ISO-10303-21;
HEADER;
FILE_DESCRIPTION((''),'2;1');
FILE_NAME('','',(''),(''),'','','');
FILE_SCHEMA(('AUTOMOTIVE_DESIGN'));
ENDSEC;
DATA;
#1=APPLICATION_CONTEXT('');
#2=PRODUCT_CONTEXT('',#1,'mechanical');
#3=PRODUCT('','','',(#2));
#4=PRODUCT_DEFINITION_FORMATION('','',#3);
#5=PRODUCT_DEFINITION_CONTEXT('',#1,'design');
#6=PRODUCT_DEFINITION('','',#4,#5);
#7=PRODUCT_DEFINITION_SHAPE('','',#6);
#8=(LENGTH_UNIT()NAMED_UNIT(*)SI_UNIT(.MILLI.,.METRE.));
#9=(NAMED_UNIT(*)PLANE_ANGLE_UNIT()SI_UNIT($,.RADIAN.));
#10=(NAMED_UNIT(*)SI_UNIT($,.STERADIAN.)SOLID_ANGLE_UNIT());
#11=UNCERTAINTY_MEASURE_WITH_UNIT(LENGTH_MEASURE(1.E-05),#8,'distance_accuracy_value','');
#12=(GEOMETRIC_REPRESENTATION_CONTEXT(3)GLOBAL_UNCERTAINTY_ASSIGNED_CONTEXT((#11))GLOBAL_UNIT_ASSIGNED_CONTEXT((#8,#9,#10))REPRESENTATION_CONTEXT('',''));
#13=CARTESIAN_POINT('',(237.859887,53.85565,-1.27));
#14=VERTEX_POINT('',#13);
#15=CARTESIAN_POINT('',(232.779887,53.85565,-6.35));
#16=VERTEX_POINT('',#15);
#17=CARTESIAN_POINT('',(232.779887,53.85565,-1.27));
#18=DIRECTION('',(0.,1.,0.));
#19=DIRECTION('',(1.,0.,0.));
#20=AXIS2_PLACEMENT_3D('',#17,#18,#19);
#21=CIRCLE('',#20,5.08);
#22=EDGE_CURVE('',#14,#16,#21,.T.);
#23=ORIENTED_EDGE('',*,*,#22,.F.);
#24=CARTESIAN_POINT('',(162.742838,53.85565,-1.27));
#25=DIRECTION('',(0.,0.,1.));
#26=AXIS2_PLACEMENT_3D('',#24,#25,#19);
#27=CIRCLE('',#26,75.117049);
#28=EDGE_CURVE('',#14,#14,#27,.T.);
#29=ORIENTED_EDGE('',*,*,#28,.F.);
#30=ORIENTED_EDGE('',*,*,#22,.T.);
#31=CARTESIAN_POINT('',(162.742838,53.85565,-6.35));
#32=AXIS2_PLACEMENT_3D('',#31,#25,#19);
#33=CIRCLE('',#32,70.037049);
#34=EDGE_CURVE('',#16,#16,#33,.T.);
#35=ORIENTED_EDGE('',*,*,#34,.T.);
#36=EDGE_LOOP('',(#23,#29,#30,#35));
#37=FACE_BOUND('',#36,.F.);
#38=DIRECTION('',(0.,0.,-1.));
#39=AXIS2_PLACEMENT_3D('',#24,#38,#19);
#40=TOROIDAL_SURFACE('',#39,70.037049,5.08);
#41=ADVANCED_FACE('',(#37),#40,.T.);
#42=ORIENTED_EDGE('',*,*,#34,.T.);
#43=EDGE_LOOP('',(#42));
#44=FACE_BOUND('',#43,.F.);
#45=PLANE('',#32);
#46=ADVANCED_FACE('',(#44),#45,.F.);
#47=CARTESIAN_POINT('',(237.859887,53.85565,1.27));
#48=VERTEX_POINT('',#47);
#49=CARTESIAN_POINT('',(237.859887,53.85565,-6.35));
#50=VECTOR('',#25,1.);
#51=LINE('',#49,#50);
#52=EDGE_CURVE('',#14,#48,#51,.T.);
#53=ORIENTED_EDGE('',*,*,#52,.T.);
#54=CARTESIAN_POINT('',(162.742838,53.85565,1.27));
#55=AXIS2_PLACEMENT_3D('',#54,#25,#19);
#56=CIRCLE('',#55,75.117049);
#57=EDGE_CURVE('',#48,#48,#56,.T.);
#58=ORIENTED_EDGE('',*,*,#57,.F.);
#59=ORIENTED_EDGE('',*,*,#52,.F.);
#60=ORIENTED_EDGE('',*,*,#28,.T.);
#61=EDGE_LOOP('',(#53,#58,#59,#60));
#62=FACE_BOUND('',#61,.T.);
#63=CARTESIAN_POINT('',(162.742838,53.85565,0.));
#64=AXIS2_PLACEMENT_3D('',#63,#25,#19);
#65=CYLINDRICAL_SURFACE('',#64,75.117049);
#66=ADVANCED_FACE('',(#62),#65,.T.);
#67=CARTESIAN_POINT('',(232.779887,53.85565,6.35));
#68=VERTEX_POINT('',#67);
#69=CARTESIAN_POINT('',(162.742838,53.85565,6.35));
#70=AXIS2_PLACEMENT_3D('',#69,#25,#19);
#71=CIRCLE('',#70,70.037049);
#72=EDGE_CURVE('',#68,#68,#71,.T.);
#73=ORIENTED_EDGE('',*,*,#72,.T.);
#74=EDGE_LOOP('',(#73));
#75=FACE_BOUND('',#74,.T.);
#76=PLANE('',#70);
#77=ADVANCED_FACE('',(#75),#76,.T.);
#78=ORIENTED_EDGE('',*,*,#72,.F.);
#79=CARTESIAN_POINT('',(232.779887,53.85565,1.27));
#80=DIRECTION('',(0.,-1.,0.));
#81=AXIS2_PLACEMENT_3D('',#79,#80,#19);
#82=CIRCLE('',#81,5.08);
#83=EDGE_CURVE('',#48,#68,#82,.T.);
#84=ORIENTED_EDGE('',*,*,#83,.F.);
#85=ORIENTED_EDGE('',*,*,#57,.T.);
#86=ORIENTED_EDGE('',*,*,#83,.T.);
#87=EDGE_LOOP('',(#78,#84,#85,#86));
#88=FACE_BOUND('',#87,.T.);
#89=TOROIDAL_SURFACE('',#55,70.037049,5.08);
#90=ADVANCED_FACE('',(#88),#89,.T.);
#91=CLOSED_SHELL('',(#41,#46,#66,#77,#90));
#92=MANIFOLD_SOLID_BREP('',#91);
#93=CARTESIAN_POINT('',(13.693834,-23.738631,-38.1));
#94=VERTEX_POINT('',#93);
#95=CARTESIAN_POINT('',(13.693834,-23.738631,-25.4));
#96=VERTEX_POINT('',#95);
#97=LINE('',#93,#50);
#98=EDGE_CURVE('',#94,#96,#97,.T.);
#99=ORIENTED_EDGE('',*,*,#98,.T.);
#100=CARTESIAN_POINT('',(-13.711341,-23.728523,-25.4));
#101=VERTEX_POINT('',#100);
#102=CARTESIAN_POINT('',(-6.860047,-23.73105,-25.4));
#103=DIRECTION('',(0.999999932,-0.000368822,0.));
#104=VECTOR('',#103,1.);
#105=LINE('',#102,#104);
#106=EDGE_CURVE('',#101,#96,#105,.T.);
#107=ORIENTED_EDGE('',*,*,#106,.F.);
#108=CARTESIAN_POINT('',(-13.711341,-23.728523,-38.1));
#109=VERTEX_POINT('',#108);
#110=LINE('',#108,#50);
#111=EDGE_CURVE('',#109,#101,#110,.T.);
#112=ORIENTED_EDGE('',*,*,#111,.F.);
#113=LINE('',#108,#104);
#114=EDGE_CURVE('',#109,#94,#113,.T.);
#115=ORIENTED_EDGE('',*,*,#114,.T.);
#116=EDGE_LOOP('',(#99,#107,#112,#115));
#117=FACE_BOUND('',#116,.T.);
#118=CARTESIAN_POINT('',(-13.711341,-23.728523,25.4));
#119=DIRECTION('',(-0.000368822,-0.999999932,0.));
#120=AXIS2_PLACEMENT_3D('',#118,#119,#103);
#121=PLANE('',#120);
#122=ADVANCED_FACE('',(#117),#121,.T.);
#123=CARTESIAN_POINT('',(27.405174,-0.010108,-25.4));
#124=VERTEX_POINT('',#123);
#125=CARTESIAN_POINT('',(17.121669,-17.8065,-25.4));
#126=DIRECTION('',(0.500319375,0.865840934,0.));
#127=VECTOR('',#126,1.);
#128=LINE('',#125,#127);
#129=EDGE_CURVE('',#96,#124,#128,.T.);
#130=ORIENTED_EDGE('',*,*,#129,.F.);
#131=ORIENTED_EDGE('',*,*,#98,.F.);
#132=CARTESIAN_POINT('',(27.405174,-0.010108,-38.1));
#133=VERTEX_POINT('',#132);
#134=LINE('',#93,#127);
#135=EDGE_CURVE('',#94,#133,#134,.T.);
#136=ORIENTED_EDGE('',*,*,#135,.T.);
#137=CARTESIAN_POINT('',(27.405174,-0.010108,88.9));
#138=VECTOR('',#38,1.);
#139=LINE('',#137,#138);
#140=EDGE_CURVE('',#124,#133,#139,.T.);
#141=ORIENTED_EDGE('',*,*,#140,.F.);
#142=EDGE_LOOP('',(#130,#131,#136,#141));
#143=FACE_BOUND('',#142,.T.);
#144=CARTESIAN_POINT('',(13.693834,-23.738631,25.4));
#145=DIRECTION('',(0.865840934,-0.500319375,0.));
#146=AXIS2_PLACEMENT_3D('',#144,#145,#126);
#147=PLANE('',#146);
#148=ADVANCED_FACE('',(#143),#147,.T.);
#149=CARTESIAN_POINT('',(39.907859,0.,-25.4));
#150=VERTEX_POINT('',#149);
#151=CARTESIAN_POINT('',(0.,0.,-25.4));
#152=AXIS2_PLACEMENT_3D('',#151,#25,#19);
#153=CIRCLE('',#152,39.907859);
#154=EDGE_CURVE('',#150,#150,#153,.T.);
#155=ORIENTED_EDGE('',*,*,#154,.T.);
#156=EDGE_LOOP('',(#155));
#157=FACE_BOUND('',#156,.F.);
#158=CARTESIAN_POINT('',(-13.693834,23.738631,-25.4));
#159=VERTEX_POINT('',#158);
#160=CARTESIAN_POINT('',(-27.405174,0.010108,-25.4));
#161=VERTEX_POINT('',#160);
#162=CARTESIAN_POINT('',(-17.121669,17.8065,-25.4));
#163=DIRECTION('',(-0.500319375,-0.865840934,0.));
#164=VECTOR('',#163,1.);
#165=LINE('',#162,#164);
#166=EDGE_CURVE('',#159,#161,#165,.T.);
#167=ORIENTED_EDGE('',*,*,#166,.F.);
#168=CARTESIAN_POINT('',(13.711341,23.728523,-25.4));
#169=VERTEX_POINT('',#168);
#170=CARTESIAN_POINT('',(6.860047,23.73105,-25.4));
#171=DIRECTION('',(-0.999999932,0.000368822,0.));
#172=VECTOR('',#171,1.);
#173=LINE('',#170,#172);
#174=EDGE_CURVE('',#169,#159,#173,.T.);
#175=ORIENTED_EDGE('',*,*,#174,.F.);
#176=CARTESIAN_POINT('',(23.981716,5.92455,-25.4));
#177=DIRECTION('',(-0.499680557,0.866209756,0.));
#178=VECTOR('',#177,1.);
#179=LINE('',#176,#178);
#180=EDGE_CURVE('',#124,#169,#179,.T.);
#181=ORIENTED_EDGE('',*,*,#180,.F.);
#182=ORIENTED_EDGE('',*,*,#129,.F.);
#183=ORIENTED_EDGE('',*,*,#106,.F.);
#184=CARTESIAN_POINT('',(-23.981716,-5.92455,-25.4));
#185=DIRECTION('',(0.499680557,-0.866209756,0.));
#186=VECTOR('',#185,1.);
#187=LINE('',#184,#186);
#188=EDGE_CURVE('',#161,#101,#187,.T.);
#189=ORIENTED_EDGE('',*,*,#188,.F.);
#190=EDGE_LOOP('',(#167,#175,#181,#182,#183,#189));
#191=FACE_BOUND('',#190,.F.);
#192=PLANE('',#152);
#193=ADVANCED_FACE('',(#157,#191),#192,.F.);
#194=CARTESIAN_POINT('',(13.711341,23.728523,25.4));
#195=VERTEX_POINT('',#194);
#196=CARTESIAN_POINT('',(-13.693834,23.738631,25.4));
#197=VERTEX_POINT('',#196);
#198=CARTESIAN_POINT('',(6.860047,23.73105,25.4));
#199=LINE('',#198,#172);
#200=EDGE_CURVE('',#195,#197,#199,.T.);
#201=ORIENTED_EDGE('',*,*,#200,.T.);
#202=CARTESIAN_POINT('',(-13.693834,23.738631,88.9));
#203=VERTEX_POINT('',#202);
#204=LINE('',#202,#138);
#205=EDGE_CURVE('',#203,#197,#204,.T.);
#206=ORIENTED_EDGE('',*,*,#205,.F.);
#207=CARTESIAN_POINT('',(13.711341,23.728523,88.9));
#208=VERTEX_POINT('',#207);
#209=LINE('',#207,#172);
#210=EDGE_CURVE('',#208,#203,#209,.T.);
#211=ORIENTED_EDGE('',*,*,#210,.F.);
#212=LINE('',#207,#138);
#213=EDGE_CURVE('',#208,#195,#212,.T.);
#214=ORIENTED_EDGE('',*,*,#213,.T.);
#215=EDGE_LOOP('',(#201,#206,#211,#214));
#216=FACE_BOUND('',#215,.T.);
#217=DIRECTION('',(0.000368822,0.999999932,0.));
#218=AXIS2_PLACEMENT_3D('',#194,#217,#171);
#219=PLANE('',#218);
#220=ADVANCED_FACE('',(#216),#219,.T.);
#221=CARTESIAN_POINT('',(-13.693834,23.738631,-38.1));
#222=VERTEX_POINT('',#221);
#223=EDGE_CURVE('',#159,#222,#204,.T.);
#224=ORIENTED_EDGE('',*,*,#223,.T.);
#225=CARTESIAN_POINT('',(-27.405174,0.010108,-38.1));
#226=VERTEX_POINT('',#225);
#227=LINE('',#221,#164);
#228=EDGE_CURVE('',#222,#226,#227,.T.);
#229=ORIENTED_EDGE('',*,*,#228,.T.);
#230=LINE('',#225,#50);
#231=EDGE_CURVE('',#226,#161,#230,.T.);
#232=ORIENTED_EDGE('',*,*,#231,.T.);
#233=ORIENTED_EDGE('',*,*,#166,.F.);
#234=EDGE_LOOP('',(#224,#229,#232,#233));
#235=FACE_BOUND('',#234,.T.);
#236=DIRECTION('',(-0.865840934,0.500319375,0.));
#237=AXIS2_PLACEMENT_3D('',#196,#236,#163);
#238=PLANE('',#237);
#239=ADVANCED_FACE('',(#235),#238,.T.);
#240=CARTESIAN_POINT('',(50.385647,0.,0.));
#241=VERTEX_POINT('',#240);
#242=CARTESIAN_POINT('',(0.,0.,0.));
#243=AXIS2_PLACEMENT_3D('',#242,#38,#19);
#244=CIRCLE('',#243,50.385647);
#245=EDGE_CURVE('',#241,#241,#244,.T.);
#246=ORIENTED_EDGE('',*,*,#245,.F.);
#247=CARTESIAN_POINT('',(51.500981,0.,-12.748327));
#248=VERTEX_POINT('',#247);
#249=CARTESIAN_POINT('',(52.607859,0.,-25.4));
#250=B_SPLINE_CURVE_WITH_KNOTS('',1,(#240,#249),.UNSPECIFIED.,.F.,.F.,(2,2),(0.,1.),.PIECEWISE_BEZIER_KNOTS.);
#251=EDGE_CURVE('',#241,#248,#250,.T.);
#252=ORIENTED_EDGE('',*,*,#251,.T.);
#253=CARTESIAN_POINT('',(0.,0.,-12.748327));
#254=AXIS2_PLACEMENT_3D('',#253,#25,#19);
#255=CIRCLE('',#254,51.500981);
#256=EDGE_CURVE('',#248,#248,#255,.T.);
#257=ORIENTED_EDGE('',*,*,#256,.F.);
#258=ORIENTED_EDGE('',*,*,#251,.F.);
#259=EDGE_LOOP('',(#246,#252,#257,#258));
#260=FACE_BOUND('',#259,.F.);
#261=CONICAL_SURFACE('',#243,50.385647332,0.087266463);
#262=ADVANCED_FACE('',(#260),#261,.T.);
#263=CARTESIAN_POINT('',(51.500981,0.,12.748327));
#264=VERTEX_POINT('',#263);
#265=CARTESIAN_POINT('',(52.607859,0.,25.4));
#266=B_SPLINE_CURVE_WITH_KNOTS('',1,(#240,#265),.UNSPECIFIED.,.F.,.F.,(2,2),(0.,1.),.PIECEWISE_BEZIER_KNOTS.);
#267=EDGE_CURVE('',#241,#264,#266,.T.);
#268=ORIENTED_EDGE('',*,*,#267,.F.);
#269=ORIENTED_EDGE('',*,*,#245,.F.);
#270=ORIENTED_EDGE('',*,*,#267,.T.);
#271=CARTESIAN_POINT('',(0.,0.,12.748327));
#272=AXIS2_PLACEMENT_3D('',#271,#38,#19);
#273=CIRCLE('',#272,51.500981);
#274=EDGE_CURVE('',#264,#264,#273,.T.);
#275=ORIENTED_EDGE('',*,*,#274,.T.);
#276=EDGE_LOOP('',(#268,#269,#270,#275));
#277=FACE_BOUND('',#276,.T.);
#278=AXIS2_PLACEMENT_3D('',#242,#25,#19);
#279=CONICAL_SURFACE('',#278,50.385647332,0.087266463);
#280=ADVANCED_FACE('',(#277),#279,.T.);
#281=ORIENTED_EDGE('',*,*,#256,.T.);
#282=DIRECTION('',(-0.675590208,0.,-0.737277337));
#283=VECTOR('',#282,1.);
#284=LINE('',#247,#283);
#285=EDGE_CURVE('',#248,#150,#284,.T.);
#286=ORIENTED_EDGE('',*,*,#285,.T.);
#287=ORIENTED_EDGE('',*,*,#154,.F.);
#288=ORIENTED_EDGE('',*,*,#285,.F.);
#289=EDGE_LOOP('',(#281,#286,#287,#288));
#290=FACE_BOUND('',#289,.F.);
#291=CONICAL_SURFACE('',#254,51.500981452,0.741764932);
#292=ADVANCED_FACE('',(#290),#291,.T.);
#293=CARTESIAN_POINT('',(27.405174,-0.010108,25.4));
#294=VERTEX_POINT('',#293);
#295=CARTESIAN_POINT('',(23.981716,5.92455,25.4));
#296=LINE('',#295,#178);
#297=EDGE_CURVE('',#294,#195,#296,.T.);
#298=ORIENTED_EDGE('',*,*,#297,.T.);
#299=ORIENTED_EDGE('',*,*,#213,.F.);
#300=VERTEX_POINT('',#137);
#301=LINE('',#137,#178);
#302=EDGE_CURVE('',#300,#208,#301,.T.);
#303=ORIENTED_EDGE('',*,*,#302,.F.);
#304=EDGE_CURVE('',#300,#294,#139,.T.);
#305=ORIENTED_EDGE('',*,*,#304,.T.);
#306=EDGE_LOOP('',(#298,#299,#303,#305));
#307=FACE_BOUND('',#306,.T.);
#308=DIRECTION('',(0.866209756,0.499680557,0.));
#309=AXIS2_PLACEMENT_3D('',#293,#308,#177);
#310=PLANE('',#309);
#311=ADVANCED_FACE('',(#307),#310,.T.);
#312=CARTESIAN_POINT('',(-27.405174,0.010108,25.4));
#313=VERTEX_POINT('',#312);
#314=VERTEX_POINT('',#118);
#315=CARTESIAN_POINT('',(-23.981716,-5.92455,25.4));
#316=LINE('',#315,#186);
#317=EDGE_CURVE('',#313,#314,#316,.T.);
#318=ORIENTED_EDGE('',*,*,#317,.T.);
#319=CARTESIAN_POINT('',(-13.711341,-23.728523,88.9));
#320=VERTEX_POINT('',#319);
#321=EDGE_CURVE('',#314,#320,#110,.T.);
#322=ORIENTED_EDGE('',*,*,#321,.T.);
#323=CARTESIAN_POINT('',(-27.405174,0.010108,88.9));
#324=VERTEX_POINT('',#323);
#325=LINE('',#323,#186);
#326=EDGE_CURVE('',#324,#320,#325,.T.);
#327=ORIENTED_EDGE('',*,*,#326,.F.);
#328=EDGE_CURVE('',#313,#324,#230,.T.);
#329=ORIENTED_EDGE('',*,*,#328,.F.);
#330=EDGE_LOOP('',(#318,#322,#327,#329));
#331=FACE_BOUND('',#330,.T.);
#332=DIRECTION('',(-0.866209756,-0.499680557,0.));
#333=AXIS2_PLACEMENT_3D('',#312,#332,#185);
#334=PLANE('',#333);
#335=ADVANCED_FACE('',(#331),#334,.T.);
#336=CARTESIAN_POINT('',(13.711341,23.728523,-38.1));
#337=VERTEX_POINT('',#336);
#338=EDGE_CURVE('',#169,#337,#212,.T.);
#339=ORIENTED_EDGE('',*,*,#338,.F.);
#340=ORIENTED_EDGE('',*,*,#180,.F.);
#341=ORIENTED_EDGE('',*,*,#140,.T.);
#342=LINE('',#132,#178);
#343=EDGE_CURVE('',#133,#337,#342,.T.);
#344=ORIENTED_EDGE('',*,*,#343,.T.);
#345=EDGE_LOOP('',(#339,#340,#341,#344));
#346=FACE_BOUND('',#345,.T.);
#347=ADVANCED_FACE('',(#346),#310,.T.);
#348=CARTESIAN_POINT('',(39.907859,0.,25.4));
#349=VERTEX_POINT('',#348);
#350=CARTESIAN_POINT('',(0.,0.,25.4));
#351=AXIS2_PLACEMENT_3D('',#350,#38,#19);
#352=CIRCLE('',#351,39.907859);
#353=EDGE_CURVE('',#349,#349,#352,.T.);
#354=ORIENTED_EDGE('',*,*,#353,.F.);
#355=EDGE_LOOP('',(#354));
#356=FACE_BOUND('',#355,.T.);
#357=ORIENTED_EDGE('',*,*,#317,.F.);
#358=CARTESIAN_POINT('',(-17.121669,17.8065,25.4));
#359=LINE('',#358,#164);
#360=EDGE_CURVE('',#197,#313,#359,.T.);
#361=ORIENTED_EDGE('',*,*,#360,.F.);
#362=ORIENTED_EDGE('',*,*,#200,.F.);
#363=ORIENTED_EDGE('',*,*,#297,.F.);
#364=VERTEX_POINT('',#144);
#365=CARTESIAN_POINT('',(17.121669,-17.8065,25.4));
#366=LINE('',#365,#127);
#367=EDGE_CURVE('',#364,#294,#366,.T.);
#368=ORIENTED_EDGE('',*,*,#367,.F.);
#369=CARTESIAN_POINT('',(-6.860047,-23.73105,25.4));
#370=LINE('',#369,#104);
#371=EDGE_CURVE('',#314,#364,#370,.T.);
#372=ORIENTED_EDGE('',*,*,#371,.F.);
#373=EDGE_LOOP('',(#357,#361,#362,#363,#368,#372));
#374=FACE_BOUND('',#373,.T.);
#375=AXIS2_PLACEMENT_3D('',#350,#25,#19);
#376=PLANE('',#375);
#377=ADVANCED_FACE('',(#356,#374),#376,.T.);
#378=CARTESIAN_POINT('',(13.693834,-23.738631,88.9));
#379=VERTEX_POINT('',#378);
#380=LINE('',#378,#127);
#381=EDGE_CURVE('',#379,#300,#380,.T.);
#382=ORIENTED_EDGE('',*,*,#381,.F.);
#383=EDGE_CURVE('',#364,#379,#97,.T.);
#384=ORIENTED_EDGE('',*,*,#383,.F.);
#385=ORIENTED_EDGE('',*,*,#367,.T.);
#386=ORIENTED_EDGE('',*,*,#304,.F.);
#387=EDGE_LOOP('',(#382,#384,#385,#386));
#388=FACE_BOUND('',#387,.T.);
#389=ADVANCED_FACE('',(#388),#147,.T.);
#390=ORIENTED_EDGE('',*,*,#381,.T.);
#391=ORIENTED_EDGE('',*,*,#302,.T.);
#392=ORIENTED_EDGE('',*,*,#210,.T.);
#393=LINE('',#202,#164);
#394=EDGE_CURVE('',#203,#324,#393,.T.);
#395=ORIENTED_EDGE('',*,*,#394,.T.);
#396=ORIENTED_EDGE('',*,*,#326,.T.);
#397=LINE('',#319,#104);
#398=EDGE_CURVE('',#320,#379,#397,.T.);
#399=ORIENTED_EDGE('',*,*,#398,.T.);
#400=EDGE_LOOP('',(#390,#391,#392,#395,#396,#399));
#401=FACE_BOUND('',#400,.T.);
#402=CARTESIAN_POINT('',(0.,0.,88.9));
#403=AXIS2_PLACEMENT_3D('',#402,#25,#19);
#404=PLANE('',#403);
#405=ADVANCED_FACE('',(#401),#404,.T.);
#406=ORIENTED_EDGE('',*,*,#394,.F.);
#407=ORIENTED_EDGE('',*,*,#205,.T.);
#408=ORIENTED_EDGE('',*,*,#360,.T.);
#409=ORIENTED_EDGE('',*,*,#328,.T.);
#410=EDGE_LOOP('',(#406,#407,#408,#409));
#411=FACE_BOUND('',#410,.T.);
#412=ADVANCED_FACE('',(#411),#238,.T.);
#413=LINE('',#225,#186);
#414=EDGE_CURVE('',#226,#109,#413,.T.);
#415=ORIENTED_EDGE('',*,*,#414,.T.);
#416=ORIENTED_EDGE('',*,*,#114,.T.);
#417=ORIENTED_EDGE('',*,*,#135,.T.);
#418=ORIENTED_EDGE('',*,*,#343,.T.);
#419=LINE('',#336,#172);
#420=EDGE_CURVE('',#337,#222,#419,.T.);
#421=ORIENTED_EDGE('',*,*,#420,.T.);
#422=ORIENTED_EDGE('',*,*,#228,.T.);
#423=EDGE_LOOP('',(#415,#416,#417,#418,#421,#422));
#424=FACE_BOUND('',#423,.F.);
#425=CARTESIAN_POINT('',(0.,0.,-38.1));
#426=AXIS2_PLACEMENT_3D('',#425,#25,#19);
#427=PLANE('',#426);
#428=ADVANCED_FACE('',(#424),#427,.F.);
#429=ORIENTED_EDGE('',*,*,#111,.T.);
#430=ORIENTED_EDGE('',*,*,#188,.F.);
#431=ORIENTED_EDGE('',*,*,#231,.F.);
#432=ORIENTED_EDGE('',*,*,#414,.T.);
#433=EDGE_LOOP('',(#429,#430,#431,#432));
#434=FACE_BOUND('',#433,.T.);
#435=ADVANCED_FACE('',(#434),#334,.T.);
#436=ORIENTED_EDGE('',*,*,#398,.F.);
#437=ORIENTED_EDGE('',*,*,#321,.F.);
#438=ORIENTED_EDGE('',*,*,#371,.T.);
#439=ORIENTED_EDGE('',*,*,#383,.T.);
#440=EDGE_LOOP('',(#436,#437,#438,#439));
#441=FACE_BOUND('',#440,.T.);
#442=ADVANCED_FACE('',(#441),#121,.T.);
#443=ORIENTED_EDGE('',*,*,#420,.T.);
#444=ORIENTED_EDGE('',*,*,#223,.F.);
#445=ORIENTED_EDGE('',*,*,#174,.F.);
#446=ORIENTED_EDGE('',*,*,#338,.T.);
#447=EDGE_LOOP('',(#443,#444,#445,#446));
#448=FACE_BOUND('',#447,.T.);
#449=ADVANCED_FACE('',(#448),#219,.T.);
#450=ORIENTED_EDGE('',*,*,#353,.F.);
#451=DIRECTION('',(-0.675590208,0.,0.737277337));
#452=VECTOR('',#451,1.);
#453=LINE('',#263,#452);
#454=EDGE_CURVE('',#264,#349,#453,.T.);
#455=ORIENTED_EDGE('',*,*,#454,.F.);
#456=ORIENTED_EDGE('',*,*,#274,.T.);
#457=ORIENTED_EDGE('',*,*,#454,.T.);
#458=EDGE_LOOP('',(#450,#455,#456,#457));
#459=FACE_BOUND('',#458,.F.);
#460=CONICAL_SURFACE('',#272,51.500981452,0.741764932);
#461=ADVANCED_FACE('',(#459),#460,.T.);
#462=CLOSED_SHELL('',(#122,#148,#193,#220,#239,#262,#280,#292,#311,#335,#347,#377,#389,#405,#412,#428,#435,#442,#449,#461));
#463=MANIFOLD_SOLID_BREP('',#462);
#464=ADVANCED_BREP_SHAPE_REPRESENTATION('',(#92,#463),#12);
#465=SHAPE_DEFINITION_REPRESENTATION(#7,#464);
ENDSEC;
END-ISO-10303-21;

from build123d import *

# Parameters (mm, degrees)
F0_R     = 50.3856473316
F1_DEPTH = 25.4
F1_TAPER = -5
F0_R_2   = 75.1170486434
F2_DEPTH = 6.35
F4_DEPTH = 63.5
F6_R     = 5.08


# Not quite as in the source:
# - a fillet or chamfer that OpenCascade refuses, or shapes differently, is made with other operations: its cross-section is extruded or revolved along the edge and cut away or added


with BuildPart() as f1:
    # F0 (on Top) → F1 (new body, symmetric)
    with BuildSketch(Plane.XY):
        Circle(F0_R)
    extrude(amount=F1_DEPTH, both=True, taper=F1_TAPER)

    # F3 (on face) → F4 (join, symmetric)
    with BuildSketch(Plane.XY.offset(25.4)):
        Polygon((-13.6938337482, 23.7386310616), (-27.4051744245, 0.0101076296), (-13.7113406763, -23.728523432), (13.6938337482, -23.7386310616), (27.4051744245, -0.0101076296), (13.7113406763, 23.728523432), align=None)
    extrude(amount=F4_DEPTH, both=True)

    # F5: chamfer of 12.7 on 2 edges, made by hand

    # F5_s1 → F5_t2 (revolve, cut)
    with BuildSketch(Plane.XZ):
        Polygon((51.5009814523, -12.7483273342), (39.9078593852, -25.4), (52.6078593852, -25.4), align=None)
    revolve(axis=Axis((0, 0, -25.4), (0, 0, 1)), mode=Mode.SUBTRACT)

    # F5_s3 → F5_t4 (revolve, cut)
    with BuildSketch(Plane.XZ):
        Polygon((51.5009814523, 12.7483273342), (39.9078593852, 25.4), (52.6078593852, 25.4), align=None)
    revolve(axis=Axis((0, 0, 25.4), (0, 0, -1)), mode=Mode.SUBTRACT)


with BuildPart() as f2:
    # F0 (on Top) → F2 (new body, symmetric)
    with BuildSketch(Plane.XY):
        with Locations((162.7428382635, 53.8556501269)):
            Circle(F0_R_2)
    extrude(amount=F2_DEPTH, both=True)

    # F6
    f6_edges = [f2.edges().sort_by_distance(p)[0] for p in [
        (87.62579, 53.85565, -6.35),
        (87.62579, 53.85565, 6.35),
    ]]
    fillet(f6_edges, radius=F6_R)


solid = Compound([f1.part, f2.part])
